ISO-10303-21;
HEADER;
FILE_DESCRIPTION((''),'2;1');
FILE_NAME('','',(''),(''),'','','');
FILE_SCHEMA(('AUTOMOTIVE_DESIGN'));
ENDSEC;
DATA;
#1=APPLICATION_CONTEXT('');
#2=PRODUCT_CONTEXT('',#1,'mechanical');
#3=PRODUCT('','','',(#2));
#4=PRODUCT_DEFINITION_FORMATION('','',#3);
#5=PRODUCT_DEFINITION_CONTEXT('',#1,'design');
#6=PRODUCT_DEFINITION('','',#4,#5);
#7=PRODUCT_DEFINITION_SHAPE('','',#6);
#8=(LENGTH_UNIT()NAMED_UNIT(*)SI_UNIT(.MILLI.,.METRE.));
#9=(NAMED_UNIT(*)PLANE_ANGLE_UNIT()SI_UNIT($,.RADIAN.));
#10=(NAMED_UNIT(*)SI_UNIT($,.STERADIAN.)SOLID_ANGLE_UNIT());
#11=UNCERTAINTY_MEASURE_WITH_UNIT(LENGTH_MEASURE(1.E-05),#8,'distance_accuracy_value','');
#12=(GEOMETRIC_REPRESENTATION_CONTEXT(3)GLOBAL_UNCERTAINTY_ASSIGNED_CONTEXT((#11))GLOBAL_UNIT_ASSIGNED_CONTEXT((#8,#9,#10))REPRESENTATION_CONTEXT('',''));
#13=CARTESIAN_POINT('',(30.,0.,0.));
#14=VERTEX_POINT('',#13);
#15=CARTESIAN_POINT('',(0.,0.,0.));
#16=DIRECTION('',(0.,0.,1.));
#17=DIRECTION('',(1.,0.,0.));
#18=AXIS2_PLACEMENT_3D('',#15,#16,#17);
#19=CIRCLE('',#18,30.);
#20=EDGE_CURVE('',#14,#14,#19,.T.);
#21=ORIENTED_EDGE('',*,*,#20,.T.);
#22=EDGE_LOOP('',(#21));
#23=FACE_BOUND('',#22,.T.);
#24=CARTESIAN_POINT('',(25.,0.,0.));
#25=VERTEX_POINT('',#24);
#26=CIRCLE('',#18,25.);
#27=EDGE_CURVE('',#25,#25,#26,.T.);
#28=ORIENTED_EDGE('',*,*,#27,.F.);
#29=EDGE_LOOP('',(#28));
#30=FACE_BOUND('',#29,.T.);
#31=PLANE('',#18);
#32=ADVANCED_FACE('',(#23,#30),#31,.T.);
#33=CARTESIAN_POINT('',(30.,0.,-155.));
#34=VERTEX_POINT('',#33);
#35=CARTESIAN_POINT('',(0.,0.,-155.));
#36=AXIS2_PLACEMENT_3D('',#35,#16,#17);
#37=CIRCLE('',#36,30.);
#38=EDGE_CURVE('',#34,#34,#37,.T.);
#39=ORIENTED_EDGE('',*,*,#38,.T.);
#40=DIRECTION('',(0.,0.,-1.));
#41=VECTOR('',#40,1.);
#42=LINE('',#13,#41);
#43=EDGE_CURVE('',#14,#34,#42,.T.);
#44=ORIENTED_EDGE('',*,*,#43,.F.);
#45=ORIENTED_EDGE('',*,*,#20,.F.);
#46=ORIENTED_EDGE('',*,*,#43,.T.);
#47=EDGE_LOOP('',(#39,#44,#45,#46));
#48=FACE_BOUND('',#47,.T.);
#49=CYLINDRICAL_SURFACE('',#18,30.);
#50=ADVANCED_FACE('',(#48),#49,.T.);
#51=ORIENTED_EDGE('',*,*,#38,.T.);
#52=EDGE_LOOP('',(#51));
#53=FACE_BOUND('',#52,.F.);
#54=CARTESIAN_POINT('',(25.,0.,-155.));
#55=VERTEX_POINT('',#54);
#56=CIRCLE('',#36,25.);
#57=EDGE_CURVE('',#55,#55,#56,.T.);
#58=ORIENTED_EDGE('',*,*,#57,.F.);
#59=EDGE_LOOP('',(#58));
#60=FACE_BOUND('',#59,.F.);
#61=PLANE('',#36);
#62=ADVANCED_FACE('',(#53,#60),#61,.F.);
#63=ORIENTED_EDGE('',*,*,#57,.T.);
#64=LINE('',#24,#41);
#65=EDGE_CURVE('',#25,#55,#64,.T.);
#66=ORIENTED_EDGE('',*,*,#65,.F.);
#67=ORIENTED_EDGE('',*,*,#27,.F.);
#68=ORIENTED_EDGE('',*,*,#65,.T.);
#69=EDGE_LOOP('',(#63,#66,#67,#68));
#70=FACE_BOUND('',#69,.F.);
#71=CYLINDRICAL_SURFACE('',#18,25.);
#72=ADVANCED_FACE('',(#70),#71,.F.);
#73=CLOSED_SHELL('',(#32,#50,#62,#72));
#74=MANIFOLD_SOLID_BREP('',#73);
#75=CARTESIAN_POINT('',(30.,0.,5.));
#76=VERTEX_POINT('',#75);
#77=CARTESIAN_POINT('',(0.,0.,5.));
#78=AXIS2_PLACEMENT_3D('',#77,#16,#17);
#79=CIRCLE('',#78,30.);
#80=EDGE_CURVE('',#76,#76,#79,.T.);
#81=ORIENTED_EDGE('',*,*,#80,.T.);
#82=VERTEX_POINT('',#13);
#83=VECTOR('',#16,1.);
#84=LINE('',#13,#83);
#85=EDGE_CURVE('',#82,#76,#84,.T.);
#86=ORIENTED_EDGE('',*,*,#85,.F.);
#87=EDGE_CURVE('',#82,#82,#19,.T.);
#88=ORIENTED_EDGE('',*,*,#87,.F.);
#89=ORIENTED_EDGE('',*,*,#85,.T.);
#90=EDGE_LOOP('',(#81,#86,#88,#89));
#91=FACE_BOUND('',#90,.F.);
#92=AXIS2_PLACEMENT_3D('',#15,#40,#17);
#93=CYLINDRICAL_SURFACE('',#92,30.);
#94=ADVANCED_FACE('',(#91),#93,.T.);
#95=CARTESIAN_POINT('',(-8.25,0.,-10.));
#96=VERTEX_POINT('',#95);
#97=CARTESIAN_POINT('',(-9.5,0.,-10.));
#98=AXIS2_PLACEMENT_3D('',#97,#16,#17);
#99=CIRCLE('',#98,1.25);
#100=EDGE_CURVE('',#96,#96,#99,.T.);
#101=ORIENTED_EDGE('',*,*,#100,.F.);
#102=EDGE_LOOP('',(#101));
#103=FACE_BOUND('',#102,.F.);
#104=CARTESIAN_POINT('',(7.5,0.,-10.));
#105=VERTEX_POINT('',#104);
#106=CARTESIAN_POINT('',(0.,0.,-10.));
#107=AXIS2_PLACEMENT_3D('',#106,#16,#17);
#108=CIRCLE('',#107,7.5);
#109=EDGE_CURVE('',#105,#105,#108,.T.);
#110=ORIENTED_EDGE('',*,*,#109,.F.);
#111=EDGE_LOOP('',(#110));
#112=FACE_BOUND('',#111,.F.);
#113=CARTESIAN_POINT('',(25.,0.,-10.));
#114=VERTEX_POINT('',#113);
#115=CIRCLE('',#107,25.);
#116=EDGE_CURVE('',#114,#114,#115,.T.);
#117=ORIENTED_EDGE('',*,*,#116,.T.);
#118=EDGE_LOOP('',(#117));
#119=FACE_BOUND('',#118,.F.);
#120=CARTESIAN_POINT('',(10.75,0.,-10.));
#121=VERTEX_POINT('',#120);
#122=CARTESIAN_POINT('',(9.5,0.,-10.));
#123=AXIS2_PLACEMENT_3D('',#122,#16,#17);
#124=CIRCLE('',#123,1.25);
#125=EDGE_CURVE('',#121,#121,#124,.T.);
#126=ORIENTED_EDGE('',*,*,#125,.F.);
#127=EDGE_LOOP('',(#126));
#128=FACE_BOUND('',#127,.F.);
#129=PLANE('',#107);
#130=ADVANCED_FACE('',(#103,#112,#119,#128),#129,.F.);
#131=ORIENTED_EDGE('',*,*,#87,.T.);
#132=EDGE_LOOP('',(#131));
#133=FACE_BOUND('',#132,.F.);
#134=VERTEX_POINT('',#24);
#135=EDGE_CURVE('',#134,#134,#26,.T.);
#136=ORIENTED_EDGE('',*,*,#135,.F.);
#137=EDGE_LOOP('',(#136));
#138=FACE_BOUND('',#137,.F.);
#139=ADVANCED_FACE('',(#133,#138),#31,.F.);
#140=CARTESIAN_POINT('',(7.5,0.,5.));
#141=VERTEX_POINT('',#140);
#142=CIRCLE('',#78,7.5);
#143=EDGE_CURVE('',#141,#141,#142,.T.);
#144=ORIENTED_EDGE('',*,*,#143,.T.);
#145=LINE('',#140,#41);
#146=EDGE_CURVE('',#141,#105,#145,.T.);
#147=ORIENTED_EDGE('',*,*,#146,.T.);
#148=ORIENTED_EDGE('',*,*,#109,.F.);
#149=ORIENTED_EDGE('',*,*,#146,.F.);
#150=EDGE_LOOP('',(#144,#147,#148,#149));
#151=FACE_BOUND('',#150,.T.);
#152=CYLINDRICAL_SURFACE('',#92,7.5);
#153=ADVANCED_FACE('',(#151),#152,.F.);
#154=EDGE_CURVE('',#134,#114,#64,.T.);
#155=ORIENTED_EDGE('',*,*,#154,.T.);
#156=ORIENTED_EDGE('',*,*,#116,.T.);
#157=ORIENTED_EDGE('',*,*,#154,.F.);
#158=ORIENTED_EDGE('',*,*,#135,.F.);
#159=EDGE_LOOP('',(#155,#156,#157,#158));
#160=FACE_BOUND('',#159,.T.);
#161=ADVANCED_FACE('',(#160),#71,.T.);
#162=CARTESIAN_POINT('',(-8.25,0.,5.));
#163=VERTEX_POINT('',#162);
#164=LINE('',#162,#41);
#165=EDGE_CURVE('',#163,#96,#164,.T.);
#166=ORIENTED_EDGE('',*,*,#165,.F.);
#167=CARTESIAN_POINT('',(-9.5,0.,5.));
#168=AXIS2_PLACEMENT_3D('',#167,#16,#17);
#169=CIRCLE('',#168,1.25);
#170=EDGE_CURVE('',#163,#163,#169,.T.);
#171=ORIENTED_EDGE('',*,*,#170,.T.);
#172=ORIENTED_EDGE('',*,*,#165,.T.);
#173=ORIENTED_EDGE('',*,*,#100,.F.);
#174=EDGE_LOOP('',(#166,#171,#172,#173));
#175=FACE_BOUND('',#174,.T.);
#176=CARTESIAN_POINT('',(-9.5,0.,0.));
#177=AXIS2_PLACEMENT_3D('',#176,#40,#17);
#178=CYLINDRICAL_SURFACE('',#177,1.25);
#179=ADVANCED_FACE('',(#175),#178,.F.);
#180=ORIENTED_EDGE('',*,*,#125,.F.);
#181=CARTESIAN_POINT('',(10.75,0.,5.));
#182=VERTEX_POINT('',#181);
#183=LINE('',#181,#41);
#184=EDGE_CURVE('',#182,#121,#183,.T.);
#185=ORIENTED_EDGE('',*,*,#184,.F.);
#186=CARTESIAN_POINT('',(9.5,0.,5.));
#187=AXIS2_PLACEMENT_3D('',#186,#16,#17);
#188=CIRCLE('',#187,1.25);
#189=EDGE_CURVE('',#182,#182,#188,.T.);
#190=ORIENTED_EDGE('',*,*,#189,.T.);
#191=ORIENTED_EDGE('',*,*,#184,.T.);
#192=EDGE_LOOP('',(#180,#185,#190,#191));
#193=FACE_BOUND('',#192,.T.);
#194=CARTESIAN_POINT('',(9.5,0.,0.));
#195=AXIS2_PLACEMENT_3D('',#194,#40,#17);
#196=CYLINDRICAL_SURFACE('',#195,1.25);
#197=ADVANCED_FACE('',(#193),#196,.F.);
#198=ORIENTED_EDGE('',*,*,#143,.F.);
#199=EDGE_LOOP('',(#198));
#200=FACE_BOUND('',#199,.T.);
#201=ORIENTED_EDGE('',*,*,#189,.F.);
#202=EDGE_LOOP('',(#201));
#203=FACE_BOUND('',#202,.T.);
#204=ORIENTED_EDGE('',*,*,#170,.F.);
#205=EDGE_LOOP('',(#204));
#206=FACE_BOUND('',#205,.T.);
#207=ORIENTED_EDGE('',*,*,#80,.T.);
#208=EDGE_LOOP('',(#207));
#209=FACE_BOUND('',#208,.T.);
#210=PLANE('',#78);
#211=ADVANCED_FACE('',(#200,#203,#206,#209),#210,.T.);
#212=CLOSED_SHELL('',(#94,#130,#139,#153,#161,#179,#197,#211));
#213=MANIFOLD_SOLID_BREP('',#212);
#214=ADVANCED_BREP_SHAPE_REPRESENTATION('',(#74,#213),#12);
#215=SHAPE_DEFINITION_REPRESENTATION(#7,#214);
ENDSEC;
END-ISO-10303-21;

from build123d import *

# Parameters (mm, degrees)
F0_R     = 30
F0_R_2   = 25
F1_DEPTH = 155
F0_R_3   = 1.25
F0_R_4   = 7.5
F2_DEPTH = 10
F3_DEPTH = 5


with BuildPart() as f1:
    # F0 (on Top) → F1 (new body)
    with BuildSketch(Plane.XY):
        Circle(F0_R)
        Circle(F0_R_2, mode=Mode.SUBTRACT)
    extrude(amount=-F1_DEPTH)


with BuildPart() as f2:
    # F0 (on Top) → F2 (new body)
    with BuildSketch(Plane.XY):
        Circle(F0_R_2)
        with Locations((-9.5, 0)):
            Circle(F0_R_3, mode=Mode.SUBTRACT)
        Circle(F0_R_4, mode=Mode.SUBTRACT)
        with Locations((9.5, 0)):
            Circle(F0_R_3, mode=Mode.SUBTRACT)
    extrude(amount=-F2_DEPTH)

    # F0 (on Top) → F3 (join)
    with BuildSketch(Plane.XY):
        Circle(F0_R)
        Circle(F0_R_2, mode=Mode.SUBTRACT)
        Circle(F0_R_2)
        with Locations((-9.5, 0)):
            Circle(F0_R_3, mode=Mode.SUBTRACT)
        Circle(F0_R_4, mode=Mode.SUBTRACT)
        with Locations((9.5, 0)):
            Circle(F0_R_3, mode=Mode.SUBTRACT)
    extrude(amount=F3_DEPTH)


solid = Compound([f1.part, f2.part])
